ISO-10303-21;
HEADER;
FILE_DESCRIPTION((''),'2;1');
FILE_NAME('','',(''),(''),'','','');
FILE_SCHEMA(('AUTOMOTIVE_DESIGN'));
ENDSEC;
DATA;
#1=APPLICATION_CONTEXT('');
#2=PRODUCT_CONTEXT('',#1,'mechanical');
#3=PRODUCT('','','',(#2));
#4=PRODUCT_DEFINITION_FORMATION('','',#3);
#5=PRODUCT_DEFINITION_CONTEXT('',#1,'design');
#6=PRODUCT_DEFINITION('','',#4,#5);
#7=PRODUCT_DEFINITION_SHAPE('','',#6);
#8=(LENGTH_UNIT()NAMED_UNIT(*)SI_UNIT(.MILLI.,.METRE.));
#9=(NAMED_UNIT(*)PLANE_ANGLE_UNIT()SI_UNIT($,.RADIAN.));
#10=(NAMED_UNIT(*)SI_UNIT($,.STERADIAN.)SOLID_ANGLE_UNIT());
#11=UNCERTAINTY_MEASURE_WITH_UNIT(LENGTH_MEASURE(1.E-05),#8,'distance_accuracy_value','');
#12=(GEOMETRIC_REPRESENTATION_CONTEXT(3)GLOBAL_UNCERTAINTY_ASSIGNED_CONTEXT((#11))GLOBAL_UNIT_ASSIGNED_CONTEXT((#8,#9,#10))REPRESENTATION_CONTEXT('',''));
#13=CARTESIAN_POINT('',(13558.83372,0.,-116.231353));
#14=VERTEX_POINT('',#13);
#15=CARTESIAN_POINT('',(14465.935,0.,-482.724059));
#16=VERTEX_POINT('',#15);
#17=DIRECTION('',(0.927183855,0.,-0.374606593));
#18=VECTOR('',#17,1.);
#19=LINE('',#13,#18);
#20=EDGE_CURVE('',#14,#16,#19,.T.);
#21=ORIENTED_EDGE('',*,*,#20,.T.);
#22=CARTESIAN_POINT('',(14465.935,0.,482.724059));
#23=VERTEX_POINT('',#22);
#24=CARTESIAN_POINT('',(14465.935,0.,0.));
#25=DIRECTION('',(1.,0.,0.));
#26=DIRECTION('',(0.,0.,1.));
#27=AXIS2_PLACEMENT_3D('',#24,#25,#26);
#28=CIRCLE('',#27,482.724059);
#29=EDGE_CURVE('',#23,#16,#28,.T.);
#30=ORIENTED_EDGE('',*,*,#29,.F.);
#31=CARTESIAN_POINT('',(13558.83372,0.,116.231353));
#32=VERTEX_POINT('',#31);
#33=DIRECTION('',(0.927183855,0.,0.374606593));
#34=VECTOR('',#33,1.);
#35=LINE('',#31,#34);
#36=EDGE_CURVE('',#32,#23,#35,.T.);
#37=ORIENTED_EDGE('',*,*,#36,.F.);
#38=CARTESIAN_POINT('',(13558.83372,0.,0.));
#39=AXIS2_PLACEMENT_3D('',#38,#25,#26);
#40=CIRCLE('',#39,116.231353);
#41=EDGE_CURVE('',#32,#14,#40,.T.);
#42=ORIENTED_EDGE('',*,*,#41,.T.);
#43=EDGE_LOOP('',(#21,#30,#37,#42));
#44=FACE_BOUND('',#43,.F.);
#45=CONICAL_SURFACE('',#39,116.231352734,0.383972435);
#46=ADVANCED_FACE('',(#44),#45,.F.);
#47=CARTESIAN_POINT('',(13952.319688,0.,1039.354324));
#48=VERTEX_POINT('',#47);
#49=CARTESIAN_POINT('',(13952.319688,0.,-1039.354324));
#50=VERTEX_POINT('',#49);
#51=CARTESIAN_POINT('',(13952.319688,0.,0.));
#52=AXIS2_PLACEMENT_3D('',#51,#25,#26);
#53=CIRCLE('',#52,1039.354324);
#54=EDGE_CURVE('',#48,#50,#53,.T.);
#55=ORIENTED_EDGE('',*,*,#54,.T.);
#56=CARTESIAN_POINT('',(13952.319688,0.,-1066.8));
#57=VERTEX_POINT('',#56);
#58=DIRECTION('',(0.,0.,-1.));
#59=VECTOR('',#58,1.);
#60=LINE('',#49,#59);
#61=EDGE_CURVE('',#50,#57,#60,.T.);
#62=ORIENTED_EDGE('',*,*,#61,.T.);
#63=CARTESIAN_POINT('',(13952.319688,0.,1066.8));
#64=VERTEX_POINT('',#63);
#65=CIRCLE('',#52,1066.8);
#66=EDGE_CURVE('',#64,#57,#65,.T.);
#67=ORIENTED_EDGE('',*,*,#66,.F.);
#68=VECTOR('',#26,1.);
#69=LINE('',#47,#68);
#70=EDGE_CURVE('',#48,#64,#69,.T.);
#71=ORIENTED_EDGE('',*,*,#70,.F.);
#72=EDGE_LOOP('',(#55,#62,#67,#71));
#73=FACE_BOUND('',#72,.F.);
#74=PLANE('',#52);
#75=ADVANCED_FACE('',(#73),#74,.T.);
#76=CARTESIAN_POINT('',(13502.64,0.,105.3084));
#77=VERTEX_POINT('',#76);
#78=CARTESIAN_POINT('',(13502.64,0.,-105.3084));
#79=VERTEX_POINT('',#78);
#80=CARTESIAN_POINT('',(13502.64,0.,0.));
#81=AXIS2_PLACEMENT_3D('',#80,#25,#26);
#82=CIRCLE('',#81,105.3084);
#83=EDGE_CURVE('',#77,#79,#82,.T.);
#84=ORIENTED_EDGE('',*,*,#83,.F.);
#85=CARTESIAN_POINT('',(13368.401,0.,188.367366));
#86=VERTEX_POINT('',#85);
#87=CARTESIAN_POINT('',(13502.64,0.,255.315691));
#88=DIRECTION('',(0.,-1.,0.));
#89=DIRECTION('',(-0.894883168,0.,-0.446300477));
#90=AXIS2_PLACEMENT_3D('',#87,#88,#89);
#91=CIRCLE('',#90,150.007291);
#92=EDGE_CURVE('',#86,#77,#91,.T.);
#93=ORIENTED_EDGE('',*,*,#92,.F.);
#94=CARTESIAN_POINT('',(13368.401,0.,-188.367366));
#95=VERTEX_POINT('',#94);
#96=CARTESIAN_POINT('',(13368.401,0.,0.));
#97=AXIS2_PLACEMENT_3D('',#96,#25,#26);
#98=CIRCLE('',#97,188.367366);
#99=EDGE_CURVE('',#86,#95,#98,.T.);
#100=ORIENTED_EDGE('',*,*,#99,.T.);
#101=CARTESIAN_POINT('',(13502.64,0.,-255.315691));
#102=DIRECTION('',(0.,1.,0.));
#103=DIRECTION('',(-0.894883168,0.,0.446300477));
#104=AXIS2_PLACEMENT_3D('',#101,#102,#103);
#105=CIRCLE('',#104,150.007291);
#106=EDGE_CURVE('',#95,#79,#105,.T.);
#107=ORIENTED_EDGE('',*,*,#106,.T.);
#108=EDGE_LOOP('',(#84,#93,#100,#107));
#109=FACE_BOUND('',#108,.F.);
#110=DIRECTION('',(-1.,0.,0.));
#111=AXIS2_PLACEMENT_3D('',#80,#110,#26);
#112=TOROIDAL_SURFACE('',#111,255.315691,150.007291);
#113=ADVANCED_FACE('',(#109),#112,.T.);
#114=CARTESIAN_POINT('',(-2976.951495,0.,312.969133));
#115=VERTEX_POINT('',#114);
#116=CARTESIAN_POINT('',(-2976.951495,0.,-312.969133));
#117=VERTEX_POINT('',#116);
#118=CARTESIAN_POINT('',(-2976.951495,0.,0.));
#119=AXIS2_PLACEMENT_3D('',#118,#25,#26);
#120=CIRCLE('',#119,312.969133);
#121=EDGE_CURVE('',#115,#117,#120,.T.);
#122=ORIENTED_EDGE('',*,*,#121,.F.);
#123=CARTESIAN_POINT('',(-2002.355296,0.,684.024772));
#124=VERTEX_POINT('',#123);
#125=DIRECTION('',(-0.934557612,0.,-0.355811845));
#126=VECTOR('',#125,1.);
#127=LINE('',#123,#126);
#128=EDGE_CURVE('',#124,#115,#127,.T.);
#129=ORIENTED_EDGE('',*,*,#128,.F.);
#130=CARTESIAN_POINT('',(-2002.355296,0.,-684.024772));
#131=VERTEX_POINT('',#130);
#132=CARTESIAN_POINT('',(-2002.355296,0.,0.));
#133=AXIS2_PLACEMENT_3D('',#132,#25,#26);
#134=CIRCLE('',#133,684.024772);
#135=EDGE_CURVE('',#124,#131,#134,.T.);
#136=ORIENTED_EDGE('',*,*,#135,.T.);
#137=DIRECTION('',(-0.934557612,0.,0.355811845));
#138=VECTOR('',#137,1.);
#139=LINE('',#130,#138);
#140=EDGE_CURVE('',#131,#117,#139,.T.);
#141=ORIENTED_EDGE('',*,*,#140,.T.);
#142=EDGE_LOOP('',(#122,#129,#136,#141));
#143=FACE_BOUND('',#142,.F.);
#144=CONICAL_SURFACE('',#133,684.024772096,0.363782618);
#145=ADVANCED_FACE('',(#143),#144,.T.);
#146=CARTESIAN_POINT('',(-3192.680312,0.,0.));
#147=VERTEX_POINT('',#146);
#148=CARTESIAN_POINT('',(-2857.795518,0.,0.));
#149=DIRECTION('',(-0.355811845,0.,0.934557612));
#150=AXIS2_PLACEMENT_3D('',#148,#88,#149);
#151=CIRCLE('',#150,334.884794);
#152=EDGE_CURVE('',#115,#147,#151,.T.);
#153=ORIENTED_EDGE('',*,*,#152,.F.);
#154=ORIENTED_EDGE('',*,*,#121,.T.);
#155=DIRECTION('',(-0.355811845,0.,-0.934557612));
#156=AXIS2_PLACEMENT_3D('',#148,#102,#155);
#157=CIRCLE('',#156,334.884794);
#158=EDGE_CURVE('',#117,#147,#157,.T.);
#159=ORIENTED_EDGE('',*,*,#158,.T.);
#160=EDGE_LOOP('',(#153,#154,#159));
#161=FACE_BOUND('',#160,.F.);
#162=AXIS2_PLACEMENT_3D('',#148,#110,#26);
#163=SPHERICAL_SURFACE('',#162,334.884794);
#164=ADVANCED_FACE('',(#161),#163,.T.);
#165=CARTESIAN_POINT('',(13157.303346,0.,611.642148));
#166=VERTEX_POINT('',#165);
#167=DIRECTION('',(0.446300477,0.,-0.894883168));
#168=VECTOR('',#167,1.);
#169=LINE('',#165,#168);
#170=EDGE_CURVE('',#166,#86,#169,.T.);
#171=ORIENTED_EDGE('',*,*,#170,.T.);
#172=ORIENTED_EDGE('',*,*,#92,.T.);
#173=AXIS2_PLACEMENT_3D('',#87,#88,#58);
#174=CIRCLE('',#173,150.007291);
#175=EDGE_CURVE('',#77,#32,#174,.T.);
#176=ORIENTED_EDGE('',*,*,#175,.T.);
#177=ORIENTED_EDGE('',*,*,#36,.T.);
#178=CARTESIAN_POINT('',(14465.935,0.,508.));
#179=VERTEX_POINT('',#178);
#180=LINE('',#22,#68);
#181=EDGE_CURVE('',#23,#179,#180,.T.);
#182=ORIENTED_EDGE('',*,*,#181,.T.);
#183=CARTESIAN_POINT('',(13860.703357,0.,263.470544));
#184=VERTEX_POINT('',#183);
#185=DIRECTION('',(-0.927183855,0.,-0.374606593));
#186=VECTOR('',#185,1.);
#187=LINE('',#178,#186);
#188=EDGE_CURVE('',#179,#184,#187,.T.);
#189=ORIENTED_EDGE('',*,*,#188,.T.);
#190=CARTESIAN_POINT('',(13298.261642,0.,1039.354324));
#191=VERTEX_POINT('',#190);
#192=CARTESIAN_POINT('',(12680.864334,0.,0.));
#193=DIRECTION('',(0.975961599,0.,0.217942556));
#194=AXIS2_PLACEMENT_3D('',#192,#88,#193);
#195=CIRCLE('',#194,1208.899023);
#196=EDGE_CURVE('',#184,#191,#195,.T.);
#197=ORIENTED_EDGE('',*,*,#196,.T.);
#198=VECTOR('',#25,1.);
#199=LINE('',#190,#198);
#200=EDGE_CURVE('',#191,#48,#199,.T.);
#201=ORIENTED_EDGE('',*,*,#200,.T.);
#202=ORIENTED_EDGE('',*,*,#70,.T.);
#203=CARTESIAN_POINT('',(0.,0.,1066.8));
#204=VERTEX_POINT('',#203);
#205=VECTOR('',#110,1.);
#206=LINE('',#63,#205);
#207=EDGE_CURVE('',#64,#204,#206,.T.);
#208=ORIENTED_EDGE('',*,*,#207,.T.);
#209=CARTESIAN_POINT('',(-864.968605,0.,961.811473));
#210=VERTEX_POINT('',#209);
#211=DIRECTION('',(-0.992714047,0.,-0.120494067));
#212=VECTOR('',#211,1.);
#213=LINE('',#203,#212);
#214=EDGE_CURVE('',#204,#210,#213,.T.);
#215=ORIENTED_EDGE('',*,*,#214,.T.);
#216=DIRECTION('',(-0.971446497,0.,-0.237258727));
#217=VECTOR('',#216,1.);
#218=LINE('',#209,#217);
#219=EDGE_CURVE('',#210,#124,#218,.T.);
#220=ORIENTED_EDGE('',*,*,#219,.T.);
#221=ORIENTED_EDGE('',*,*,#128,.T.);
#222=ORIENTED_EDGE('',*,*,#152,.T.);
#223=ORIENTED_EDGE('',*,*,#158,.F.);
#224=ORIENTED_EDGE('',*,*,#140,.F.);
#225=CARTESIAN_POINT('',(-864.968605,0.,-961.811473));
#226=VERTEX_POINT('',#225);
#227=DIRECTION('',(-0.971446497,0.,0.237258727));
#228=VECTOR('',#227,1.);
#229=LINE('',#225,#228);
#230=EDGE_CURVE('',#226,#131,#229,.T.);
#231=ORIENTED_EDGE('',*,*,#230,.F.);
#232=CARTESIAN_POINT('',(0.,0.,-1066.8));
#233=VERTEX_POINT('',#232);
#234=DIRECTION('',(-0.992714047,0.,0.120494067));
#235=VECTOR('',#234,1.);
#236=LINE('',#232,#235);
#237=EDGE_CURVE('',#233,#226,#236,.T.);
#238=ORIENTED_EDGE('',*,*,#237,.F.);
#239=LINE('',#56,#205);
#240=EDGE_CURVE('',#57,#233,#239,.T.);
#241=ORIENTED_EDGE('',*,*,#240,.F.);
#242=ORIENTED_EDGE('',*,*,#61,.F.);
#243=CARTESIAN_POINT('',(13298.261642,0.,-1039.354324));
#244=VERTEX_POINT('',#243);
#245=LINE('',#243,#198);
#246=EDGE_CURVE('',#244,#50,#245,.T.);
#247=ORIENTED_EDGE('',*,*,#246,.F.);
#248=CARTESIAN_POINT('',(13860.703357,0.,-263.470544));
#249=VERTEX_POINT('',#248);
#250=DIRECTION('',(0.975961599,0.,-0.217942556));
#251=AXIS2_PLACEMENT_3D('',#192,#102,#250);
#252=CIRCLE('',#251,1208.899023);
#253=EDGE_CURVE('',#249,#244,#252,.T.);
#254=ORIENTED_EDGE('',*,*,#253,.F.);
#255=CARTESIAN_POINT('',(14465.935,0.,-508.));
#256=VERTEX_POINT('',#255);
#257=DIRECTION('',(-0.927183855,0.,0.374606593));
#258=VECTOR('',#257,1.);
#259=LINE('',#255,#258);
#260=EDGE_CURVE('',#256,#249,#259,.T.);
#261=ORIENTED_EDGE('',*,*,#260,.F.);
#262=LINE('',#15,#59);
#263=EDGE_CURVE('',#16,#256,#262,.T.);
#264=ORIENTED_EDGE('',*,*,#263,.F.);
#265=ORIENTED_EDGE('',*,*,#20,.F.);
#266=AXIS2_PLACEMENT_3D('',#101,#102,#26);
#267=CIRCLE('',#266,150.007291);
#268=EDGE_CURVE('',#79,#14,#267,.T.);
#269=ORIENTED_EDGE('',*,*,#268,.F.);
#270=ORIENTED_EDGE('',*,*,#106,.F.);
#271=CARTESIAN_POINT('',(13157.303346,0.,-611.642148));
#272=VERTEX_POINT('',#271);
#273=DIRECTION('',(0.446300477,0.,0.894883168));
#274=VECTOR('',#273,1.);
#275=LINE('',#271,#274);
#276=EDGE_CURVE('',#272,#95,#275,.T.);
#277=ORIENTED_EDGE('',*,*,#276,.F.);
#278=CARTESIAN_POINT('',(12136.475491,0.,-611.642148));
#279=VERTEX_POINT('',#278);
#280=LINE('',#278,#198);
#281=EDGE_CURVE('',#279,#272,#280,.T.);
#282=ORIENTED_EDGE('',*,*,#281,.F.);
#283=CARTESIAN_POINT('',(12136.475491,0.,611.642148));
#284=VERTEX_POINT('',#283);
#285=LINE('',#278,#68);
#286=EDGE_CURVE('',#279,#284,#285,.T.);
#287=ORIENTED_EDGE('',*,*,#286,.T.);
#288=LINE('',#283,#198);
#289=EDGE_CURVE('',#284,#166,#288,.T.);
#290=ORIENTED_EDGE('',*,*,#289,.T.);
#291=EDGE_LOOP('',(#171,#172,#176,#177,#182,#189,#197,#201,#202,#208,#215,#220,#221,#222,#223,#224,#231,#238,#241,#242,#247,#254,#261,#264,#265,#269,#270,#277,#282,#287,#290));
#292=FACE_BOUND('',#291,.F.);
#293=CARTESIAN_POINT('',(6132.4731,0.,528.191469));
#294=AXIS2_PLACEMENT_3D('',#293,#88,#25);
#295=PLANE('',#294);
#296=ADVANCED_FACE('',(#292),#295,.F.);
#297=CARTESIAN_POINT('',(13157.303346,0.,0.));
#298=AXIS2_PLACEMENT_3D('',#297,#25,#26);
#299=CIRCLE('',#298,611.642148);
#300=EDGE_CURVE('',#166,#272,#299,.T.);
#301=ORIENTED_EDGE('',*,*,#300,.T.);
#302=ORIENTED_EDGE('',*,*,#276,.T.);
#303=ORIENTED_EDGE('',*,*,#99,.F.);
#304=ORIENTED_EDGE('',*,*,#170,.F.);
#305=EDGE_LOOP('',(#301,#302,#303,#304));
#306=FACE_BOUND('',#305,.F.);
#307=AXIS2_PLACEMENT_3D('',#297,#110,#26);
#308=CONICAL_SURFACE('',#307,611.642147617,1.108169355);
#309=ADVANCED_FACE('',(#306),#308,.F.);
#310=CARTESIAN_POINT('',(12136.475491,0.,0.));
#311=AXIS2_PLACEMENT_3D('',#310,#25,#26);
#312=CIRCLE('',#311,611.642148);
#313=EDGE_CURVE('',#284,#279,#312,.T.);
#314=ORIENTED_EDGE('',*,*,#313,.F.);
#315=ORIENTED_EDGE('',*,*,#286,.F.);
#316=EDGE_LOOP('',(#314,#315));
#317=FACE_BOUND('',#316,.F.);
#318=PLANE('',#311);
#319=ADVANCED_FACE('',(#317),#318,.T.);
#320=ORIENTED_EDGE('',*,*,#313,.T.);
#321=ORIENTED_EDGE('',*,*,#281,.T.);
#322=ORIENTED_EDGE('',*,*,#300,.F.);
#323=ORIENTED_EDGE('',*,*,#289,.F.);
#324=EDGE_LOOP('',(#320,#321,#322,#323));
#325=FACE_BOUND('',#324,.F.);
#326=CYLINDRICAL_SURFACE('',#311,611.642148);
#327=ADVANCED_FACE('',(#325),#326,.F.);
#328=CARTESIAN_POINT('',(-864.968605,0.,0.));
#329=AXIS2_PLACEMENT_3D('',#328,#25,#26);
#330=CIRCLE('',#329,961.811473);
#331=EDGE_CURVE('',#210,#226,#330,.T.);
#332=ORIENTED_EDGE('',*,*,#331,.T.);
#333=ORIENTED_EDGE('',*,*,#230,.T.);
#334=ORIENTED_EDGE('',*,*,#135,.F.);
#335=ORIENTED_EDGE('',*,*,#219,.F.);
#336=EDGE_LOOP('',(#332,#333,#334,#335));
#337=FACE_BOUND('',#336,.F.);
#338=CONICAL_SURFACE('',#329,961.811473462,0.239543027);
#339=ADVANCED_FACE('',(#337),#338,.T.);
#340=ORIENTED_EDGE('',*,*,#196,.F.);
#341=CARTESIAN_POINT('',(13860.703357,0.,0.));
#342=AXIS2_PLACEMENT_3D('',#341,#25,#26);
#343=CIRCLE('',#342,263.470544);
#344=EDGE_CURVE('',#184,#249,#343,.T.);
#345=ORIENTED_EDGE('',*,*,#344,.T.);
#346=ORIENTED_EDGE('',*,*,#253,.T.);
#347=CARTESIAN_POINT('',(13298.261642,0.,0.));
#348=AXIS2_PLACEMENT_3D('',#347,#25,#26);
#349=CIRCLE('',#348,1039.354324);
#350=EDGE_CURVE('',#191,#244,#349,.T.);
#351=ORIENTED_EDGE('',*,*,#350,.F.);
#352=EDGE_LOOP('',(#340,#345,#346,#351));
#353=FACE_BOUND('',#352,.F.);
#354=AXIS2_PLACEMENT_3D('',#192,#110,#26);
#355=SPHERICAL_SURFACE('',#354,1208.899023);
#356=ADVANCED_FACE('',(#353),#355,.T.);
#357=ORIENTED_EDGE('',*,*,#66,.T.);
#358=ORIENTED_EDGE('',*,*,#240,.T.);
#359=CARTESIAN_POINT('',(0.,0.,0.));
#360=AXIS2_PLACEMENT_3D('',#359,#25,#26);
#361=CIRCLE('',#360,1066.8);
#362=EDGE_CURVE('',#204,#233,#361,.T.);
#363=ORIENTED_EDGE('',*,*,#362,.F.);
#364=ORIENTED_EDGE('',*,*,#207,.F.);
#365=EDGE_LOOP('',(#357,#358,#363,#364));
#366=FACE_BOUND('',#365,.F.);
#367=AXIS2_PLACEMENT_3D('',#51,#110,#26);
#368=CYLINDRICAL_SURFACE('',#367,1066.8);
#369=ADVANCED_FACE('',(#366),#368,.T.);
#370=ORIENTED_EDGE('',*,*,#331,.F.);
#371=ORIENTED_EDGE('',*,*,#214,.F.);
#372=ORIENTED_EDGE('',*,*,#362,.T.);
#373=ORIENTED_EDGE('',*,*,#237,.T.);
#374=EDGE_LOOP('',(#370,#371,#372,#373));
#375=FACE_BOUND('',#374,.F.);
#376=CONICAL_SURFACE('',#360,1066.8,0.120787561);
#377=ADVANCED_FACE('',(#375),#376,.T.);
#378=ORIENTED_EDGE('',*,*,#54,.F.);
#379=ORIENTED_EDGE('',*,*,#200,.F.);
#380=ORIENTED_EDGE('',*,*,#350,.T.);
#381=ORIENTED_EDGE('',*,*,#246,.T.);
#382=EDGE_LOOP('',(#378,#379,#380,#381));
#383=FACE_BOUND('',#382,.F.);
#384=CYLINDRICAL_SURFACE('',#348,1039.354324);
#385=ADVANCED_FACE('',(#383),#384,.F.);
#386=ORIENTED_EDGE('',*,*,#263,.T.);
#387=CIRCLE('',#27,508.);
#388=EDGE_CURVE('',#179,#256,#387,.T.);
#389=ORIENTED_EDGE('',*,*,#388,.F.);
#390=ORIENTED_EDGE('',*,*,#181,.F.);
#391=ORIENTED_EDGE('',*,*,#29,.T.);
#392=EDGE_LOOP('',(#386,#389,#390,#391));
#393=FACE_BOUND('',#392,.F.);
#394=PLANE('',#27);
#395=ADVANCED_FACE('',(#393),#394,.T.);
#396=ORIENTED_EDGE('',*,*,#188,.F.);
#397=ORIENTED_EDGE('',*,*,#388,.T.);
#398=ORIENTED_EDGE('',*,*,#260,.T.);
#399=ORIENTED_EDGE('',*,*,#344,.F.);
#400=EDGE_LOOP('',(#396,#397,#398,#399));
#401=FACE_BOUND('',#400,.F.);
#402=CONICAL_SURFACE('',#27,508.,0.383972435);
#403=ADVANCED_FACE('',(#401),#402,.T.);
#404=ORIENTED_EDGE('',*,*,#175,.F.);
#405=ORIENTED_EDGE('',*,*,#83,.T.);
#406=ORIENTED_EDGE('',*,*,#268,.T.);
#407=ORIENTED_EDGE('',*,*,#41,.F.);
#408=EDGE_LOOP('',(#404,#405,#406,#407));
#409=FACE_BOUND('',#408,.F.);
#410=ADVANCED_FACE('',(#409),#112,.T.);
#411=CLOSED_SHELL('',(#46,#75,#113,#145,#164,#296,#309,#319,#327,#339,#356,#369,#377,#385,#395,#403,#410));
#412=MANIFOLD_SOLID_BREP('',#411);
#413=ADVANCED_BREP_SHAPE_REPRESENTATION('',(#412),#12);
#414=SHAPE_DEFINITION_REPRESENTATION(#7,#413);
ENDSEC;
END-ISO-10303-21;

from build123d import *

# Parameters (mm, degrees)
F1_ANGLE = 180


with BuildPart() as f1:
    # F0 (on Front) → F1 (revolve)
    with BuildSketch(Plane.XZ):
        with BuildLine():
            Line((13952.3196879505, 1066.8), (0, 1066.8))
            Line((0, 1066.8), (-864.9686047513, 961.8114734625))
            Line((-864.9686047513, 961.8114734625), (-2002.3552955837, 684.0247720961))
            Line((-2002.3552955837, 684.0247720961), (-2976.9514947803, 312.9691331448))
            ThreePointArc((-2976.9514947803, 312.9691331448), (-3133.5230556351, 190.0582811283), (-3192.6803120495, 0))
            Line((-3192.6803120495, 0), (12136.4754910278, 0))
            Line((12136.4754910278, 0), (12136.4754910278, 611.6421476167))
            Line((12136.4754910278, 611.6421476167), (13157.3033463571, 611.6421476167))
            Line((13157.3033463571, 611.6421476167), (13368.401, 188.3673656228))
            ThreePointArc((13368.401, 188.3673656228), (13423.7113916071, 127.7521298206), (13502.64, 105.3084))
            ThreePointArc((13502.64, 105.3084), (13531.2627405393, 108.0644564433), (13558.8337203562, 116.2313527344))
            Line((13558.8337203562, 116.2313527344), (13952.3196879505, 275.2100031406))
            Line((13952.3196879505, 275.2100031406), (14465.935, 482.7240591992))
            Line((14465.935, 482.7240591992), (14465.935, 508))
            Line((14465.935, 508), (13860.7033572475, 263.4705436227))
            ThreePointArc((13860.7033572475, 263.4705436227), (13659.6459839666, 709.523311654), (13298.2616424561, 1039.3543243408))
            Line((13298.2616424561, 1039.3543243408), (13952.3196879505, 1039.3543243408))
            Line((13952.3196879505, 1039.3543243408), (13952.3196879505, 1066.8))
        make_face()
    revolve(axis=Axis((28212.9992331256, 0, 0), (1, 0, 0)), revolution_arc=F1_ANGLE)


solid = f1.part
